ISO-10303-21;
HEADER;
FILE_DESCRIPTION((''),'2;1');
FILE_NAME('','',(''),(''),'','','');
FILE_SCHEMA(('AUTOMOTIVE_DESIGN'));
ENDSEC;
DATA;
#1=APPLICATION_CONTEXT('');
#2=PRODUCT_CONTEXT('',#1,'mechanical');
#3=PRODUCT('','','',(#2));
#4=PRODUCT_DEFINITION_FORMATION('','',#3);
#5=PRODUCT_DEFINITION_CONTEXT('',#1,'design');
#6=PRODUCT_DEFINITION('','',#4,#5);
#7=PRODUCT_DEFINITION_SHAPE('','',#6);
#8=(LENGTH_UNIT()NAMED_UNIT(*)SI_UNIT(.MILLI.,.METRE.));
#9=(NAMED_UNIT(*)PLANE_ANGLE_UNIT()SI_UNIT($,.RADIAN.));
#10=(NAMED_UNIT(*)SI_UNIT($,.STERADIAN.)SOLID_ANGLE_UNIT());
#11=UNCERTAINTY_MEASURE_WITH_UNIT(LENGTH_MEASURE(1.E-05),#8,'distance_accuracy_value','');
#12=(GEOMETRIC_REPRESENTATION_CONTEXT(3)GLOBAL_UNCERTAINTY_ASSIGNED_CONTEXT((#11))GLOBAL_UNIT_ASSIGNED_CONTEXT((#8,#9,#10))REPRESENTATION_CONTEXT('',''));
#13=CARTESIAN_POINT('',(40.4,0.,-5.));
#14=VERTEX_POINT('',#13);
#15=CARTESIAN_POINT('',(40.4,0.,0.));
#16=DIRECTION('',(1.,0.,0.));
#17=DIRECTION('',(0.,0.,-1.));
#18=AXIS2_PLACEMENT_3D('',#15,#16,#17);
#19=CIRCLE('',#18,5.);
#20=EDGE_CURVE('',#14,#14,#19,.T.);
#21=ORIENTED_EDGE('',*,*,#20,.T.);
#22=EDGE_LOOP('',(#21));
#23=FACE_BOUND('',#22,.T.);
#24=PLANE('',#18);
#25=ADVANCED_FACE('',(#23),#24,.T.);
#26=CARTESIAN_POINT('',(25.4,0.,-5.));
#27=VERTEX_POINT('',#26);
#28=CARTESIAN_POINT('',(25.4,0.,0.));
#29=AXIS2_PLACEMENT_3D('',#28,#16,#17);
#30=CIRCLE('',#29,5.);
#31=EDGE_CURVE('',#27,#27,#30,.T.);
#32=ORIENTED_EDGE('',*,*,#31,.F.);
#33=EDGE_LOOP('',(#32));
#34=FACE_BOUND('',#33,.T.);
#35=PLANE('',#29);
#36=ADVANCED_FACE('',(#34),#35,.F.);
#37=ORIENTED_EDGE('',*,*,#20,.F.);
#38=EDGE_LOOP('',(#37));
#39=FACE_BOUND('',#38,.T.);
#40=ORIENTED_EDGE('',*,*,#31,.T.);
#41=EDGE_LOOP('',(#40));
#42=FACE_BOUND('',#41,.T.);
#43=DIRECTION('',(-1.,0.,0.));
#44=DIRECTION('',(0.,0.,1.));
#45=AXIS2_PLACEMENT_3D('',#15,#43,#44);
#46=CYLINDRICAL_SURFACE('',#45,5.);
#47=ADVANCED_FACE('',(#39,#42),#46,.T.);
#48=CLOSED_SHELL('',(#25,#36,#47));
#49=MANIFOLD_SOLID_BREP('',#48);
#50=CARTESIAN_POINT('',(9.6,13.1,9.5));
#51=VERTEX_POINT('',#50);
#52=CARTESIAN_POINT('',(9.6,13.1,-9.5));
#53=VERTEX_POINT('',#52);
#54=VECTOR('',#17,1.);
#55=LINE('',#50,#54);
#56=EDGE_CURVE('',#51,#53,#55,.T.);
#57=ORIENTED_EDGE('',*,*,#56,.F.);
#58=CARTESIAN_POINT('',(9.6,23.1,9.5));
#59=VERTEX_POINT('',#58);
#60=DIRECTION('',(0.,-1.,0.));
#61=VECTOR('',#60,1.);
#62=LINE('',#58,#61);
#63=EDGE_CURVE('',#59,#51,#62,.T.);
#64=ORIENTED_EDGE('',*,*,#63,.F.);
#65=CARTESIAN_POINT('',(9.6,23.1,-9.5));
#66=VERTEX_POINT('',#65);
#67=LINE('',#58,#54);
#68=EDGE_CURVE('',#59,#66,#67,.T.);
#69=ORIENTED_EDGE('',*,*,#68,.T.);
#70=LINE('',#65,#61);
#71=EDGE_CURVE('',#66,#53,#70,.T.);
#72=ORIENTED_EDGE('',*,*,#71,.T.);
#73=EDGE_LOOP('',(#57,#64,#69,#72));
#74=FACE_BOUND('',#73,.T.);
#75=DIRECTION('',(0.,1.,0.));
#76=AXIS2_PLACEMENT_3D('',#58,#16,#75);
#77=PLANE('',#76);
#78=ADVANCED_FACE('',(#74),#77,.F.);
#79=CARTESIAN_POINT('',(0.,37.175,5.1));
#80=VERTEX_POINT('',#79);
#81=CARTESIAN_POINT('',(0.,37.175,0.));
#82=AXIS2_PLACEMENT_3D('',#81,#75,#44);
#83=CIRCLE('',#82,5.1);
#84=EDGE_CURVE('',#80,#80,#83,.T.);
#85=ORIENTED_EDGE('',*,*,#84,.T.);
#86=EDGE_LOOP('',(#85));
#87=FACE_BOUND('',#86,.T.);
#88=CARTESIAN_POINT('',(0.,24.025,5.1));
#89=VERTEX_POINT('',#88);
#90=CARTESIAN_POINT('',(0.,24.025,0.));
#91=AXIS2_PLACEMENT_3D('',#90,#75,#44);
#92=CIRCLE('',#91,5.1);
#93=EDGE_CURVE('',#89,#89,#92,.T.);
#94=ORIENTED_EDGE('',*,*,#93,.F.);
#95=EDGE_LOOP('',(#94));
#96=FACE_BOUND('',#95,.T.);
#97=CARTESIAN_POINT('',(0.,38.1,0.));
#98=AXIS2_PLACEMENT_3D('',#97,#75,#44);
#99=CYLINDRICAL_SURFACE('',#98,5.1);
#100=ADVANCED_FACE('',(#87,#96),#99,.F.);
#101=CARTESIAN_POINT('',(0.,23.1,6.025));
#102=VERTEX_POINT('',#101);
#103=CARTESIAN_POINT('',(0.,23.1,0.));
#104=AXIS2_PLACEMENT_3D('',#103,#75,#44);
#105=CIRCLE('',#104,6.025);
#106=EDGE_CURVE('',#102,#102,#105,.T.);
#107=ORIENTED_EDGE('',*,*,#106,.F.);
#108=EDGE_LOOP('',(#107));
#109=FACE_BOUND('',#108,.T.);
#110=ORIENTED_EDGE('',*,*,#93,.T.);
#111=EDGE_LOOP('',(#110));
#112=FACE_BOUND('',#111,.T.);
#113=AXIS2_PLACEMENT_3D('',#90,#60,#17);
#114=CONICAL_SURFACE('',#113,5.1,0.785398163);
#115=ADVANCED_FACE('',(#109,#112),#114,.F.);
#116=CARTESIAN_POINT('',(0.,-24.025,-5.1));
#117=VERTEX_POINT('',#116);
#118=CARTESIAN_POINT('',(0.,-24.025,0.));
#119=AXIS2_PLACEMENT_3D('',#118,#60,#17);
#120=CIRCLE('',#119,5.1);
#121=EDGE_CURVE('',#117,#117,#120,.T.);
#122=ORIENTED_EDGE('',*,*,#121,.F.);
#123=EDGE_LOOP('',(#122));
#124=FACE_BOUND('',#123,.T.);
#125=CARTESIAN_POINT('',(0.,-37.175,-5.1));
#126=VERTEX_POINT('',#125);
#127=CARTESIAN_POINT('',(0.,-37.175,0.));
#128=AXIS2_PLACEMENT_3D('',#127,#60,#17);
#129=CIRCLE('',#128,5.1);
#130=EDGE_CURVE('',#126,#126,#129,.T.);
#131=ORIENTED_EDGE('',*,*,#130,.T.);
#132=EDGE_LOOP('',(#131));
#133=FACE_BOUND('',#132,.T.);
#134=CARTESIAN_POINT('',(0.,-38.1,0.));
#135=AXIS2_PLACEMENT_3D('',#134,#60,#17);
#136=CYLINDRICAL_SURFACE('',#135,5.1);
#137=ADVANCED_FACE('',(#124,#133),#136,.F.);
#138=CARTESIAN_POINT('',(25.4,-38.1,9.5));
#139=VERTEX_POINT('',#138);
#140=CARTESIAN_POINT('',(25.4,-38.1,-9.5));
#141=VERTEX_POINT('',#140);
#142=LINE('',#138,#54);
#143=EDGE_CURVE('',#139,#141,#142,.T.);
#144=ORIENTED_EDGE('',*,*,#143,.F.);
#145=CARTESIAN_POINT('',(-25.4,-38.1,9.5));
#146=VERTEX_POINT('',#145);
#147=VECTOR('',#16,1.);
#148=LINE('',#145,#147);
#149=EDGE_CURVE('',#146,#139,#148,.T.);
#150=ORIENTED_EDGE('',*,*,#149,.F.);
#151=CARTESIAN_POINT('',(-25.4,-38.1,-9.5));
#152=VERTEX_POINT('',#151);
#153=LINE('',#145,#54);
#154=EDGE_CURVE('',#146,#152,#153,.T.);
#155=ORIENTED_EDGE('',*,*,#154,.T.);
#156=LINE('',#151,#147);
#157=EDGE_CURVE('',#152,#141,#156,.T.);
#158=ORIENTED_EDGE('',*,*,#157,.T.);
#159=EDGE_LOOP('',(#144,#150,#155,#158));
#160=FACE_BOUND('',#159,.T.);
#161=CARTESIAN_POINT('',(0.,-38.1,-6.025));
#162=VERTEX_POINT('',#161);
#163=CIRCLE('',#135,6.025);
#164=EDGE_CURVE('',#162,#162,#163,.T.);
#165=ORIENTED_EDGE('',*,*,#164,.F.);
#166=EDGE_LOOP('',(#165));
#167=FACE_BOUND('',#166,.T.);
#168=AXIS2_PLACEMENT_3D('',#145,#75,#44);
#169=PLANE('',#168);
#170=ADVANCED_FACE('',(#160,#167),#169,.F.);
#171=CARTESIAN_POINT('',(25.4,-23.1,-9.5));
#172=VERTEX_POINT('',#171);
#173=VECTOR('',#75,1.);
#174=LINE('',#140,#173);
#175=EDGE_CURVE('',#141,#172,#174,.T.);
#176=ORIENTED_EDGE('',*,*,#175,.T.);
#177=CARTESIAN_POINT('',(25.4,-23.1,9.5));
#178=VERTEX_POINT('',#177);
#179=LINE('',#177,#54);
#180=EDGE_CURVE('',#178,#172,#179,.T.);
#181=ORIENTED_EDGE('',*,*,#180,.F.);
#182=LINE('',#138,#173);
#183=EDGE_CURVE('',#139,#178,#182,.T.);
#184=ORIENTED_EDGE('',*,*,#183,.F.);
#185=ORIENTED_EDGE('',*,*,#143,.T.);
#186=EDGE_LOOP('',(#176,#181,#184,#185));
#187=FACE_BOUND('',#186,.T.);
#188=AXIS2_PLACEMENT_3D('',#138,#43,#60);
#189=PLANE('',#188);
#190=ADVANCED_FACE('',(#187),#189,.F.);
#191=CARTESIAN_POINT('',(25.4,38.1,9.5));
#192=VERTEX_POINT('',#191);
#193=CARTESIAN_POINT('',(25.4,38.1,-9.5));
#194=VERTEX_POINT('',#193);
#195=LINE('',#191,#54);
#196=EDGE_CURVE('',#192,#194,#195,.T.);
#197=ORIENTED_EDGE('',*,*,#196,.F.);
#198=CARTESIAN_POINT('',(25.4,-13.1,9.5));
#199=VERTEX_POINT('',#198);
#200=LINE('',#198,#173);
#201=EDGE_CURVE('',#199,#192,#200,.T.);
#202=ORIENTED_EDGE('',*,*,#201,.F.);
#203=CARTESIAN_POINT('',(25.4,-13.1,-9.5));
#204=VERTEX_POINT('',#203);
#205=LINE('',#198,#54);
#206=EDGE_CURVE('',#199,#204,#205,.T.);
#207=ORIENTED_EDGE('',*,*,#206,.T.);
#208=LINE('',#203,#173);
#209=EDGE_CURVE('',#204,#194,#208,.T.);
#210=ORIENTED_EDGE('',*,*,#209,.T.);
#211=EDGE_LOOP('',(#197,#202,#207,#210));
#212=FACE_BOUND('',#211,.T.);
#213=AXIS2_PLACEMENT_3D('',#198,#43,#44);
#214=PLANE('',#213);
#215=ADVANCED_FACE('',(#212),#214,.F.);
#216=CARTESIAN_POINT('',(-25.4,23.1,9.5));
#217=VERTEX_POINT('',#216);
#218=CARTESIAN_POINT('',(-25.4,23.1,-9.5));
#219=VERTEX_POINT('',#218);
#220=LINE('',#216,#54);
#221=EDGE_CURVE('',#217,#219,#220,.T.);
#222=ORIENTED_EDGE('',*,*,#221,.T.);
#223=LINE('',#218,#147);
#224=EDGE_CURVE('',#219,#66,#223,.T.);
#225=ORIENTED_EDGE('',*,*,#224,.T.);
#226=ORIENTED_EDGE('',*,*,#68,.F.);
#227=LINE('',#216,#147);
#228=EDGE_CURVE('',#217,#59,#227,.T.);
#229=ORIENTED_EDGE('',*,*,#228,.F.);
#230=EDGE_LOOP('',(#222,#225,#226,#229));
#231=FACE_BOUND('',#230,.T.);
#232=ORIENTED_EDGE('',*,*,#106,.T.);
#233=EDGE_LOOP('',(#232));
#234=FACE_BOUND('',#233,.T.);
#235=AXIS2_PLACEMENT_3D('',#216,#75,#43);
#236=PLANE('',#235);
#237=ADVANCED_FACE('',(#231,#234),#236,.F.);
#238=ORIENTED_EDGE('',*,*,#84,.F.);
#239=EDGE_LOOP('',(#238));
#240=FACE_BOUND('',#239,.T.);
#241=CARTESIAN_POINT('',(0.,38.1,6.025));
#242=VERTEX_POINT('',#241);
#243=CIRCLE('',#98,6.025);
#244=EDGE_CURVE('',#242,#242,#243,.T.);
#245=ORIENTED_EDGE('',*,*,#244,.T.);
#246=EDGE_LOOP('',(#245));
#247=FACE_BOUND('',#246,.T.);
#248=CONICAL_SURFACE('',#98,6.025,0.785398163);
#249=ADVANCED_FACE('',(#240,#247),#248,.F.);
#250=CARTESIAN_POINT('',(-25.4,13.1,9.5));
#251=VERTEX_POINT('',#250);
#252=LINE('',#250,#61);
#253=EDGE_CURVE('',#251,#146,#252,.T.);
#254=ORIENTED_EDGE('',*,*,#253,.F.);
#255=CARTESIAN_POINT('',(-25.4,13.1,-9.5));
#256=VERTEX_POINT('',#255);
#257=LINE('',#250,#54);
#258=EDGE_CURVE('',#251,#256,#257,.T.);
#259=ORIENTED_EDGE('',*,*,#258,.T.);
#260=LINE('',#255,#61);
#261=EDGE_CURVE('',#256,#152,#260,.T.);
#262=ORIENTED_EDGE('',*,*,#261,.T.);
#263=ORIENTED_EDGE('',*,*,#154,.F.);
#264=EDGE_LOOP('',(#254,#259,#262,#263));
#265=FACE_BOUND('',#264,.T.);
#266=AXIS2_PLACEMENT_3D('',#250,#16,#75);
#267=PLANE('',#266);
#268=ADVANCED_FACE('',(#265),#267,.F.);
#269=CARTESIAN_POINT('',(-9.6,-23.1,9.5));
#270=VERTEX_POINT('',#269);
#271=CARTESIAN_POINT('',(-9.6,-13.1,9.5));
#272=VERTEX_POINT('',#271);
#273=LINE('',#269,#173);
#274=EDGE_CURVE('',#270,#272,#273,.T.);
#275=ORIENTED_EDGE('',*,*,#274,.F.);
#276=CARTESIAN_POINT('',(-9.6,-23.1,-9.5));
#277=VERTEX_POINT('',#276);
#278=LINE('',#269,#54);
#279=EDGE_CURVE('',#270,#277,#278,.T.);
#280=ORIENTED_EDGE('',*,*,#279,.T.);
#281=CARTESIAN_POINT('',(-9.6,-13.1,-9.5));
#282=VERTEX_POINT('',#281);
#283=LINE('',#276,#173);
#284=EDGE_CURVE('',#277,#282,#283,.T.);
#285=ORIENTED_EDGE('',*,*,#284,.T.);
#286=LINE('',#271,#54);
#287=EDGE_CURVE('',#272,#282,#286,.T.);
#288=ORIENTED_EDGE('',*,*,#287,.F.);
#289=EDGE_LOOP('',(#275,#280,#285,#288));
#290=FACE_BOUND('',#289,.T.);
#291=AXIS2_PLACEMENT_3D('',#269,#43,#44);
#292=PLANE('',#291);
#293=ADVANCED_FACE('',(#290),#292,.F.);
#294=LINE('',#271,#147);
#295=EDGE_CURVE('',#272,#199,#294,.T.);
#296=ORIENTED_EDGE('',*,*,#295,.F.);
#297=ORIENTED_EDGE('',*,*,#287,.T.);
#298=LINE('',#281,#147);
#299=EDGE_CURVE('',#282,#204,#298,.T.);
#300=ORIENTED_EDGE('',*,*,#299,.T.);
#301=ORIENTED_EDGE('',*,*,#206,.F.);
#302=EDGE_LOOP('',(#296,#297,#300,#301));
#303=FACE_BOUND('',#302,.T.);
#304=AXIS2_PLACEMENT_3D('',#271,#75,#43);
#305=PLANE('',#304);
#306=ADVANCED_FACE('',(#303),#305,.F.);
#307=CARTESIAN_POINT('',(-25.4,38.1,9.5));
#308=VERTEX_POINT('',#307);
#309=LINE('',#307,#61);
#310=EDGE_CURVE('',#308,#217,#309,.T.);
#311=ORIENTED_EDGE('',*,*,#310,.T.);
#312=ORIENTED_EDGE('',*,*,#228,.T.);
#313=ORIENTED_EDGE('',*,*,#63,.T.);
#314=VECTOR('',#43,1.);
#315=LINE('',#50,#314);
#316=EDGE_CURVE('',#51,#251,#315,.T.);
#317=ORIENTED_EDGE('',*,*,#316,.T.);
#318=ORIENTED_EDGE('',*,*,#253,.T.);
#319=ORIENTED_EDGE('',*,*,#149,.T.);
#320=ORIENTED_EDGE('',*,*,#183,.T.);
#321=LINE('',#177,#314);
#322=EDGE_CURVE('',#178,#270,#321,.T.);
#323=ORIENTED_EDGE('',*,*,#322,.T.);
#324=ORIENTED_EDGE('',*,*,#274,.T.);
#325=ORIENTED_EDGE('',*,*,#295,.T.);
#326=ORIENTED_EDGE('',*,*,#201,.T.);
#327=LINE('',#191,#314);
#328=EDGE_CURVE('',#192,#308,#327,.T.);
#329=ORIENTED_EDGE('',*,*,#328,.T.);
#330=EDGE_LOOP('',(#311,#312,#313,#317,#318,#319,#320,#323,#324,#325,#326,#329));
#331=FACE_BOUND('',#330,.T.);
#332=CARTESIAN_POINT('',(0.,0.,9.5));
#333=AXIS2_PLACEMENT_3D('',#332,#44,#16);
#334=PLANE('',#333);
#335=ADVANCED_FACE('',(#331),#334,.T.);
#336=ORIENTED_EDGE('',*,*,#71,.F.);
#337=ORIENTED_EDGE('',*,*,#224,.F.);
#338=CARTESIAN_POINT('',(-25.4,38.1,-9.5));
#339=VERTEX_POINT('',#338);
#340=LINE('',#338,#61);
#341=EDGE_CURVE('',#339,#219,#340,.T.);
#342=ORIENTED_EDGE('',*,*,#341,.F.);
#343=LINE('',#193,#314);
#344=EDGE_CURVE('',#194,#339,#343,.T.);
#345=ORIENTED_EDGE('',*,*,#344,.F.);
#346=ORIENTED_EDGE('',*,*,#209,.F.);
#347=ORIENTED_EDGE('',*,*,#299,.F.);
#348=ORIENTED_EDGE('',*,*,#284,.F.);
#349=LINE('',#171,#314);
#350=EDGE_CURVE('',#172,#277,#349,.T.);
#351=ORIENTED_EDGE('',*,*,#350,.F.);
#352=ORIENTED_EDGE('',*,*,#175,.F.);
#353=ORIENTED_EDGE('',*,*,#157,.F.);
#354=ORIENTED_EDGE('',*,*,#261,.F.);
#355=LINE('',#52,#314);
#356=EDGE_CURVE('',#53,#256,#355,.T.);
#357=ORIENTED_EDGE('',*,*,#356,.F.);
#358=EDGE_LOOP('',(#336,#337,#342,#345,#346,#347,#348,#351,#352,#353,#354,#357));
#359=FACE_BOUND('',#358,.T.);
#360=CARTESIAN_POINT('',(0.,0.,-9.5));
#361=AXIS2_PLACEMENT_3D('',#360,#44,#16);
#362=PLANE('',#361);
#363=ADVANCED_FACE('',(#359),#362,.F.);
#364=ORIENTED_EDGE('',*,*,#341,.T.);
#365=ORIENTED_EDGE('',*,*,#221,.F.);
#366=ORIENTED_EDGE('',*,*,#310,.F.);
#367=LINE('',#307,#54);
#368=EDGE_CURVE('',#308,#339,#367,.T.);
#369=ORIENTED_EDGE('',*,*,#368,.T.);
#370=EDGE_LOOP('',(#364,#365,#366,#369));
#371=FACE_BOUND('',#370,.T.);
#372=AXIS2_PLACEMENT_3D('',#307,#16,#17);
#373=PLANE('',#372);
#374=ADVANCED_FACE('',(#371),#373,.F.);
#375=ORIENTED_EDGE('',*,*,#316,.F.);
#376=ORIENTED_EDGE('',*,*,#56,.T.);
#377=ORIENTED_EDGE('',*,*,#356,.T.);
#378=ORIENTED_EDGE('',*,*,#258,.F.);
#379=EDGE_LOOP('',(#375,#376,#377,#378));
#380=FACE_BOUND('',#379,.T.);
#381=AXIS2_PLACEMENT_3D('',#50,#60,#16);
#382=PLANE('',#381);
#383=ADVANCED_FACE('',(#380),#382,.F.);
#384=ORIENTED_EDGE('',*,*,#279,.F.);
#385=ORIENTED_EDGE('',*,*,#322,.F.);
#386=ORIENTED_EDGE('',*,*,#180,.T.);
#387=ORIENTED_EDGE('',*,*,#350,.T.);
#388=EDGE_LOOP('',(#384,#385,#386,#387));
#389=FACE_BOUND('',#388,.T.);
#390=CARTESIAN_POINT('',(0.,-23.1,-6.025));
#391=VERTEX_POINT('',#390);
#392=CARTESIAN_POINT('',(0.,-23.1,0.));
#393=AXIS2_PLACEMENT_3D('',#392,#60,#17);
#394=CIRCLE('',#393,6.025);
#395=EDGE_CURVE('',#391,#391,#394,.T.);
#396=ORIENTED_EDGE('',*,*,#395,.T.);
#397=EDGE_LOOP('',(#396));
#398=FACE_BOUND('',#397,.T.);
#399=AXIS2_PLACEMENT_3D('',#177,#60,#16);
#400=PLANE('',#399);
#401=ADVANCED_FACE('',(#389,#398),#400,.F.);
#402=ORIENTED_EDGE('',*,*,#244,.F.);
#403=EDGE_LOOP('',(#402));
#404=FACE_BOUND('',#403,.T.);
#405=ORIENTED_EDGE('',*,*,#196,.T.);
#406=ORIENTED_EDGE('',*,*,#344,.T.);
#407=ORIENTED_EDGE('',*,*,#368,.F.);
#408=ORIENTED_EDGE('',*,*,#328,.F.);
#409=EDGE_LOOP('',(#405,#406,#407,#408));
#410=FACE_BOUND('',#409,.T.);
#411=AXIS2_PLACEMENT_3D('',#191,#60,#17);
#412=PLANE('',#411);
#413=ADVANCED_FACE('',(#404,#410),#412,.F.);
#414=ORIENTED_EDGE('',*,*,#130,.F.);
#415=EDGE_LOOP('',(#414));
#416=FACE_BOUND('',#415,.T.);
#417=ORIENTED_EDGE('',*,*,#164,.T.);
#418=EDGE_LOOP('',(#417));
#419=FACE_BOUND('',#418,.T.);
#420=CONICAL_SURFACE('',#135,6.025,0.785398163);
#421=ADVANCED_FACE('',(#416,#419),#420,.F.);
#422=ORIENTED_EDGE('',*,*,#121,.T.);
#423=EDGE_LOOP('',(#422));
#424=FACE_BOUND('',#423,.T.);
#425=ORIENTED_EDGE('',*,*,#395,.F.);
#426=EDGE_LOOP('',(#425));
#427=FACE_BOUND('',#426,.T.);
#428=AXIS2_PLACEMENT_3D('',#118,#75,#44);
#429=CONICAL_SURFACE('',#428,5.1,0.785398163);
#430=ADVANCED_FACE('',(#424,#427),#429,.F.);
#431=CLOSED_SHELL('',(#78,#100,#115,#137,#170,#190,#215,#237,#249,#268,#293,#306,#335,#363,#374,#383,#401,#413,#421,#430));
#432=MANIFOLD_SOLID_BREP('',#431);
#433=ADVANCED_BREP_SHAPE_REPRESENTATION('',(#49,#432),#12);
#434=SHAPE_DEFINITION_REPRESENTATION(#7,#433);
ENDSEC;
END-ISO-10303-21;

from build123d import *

# Parameters (mm, degrees)
BOSS_EXTRUDE1_DEPTH = 9.5
SKETCH7_R           = 5
DATA_WIRE_DEPTH     = 15


# Read off the part's stored shape, not the designer's step: M12x1.75 Tapped Hole1
with BuildPart() as part:
    # Sketch1 → Boss-Extrude1 (new, symmetric)
    with BuildSketch(Plane.XY):
        Polygon((-25.4, 13.1), (-25.4, -38.1), (25.4, -38.1), (25.4, -23.1), (-9.6, -23.1), (-9.6, -13.1), (25.4, -13.1), (25.4, 38.1), (-25.4, 38.1), (-25.4, 23.1), (9.6, 23.1), (9.6, 13.1), align=None)
    extrude(amount=BOSS_EXTRUDE1_DEPTH, both=True)

    # M12x1.75 Tapped Hole1 outline → M12x1.75 Tapped Hole1 (revolve, cut)
    with BuildSketch(Plane.XY):
        Polygon((0, 23.1), (6.025, 23.1), (5.1, 24.025), (5.1, 37.175), (6.025, 38.1), (0, 38.1), align=None)
    revolve(axis=Axis((0, 0, 0), (0, 1, 0)), mode=Mode.SUBTRACT)

    # Sketch6 → M12x1.75 Tapped Hole2 (revolve, cut)
    with BuildSketch(Plane(origin=(0, -38.1, 0), x_dir=(0, 0, -1), z_dir=(1, 0, 0))):
        Polygon((0, 0), (0, 15), (6.025, 15), (5.1, 14.075), (5.1, 0.925), (6.025, 0), align=None)
    revolve(axis=Axis((0, -44.45, 0), (0, 1, 0)), mode=Mode.SUBTRACT)


with BuildPart() as body_2:
    # Sketch7 → Data Wire (new body)
    with BuildSketch(Plane(origin=(25.4, 0, 0), x_dir=(0, 0, -1), z_dir=(1, 0, 0))):
        Circle(SKETCH7_R)
    extrude(amount=DATA_WIRE_DEPTH)


solid = Compound([part.part, body_2.part])
